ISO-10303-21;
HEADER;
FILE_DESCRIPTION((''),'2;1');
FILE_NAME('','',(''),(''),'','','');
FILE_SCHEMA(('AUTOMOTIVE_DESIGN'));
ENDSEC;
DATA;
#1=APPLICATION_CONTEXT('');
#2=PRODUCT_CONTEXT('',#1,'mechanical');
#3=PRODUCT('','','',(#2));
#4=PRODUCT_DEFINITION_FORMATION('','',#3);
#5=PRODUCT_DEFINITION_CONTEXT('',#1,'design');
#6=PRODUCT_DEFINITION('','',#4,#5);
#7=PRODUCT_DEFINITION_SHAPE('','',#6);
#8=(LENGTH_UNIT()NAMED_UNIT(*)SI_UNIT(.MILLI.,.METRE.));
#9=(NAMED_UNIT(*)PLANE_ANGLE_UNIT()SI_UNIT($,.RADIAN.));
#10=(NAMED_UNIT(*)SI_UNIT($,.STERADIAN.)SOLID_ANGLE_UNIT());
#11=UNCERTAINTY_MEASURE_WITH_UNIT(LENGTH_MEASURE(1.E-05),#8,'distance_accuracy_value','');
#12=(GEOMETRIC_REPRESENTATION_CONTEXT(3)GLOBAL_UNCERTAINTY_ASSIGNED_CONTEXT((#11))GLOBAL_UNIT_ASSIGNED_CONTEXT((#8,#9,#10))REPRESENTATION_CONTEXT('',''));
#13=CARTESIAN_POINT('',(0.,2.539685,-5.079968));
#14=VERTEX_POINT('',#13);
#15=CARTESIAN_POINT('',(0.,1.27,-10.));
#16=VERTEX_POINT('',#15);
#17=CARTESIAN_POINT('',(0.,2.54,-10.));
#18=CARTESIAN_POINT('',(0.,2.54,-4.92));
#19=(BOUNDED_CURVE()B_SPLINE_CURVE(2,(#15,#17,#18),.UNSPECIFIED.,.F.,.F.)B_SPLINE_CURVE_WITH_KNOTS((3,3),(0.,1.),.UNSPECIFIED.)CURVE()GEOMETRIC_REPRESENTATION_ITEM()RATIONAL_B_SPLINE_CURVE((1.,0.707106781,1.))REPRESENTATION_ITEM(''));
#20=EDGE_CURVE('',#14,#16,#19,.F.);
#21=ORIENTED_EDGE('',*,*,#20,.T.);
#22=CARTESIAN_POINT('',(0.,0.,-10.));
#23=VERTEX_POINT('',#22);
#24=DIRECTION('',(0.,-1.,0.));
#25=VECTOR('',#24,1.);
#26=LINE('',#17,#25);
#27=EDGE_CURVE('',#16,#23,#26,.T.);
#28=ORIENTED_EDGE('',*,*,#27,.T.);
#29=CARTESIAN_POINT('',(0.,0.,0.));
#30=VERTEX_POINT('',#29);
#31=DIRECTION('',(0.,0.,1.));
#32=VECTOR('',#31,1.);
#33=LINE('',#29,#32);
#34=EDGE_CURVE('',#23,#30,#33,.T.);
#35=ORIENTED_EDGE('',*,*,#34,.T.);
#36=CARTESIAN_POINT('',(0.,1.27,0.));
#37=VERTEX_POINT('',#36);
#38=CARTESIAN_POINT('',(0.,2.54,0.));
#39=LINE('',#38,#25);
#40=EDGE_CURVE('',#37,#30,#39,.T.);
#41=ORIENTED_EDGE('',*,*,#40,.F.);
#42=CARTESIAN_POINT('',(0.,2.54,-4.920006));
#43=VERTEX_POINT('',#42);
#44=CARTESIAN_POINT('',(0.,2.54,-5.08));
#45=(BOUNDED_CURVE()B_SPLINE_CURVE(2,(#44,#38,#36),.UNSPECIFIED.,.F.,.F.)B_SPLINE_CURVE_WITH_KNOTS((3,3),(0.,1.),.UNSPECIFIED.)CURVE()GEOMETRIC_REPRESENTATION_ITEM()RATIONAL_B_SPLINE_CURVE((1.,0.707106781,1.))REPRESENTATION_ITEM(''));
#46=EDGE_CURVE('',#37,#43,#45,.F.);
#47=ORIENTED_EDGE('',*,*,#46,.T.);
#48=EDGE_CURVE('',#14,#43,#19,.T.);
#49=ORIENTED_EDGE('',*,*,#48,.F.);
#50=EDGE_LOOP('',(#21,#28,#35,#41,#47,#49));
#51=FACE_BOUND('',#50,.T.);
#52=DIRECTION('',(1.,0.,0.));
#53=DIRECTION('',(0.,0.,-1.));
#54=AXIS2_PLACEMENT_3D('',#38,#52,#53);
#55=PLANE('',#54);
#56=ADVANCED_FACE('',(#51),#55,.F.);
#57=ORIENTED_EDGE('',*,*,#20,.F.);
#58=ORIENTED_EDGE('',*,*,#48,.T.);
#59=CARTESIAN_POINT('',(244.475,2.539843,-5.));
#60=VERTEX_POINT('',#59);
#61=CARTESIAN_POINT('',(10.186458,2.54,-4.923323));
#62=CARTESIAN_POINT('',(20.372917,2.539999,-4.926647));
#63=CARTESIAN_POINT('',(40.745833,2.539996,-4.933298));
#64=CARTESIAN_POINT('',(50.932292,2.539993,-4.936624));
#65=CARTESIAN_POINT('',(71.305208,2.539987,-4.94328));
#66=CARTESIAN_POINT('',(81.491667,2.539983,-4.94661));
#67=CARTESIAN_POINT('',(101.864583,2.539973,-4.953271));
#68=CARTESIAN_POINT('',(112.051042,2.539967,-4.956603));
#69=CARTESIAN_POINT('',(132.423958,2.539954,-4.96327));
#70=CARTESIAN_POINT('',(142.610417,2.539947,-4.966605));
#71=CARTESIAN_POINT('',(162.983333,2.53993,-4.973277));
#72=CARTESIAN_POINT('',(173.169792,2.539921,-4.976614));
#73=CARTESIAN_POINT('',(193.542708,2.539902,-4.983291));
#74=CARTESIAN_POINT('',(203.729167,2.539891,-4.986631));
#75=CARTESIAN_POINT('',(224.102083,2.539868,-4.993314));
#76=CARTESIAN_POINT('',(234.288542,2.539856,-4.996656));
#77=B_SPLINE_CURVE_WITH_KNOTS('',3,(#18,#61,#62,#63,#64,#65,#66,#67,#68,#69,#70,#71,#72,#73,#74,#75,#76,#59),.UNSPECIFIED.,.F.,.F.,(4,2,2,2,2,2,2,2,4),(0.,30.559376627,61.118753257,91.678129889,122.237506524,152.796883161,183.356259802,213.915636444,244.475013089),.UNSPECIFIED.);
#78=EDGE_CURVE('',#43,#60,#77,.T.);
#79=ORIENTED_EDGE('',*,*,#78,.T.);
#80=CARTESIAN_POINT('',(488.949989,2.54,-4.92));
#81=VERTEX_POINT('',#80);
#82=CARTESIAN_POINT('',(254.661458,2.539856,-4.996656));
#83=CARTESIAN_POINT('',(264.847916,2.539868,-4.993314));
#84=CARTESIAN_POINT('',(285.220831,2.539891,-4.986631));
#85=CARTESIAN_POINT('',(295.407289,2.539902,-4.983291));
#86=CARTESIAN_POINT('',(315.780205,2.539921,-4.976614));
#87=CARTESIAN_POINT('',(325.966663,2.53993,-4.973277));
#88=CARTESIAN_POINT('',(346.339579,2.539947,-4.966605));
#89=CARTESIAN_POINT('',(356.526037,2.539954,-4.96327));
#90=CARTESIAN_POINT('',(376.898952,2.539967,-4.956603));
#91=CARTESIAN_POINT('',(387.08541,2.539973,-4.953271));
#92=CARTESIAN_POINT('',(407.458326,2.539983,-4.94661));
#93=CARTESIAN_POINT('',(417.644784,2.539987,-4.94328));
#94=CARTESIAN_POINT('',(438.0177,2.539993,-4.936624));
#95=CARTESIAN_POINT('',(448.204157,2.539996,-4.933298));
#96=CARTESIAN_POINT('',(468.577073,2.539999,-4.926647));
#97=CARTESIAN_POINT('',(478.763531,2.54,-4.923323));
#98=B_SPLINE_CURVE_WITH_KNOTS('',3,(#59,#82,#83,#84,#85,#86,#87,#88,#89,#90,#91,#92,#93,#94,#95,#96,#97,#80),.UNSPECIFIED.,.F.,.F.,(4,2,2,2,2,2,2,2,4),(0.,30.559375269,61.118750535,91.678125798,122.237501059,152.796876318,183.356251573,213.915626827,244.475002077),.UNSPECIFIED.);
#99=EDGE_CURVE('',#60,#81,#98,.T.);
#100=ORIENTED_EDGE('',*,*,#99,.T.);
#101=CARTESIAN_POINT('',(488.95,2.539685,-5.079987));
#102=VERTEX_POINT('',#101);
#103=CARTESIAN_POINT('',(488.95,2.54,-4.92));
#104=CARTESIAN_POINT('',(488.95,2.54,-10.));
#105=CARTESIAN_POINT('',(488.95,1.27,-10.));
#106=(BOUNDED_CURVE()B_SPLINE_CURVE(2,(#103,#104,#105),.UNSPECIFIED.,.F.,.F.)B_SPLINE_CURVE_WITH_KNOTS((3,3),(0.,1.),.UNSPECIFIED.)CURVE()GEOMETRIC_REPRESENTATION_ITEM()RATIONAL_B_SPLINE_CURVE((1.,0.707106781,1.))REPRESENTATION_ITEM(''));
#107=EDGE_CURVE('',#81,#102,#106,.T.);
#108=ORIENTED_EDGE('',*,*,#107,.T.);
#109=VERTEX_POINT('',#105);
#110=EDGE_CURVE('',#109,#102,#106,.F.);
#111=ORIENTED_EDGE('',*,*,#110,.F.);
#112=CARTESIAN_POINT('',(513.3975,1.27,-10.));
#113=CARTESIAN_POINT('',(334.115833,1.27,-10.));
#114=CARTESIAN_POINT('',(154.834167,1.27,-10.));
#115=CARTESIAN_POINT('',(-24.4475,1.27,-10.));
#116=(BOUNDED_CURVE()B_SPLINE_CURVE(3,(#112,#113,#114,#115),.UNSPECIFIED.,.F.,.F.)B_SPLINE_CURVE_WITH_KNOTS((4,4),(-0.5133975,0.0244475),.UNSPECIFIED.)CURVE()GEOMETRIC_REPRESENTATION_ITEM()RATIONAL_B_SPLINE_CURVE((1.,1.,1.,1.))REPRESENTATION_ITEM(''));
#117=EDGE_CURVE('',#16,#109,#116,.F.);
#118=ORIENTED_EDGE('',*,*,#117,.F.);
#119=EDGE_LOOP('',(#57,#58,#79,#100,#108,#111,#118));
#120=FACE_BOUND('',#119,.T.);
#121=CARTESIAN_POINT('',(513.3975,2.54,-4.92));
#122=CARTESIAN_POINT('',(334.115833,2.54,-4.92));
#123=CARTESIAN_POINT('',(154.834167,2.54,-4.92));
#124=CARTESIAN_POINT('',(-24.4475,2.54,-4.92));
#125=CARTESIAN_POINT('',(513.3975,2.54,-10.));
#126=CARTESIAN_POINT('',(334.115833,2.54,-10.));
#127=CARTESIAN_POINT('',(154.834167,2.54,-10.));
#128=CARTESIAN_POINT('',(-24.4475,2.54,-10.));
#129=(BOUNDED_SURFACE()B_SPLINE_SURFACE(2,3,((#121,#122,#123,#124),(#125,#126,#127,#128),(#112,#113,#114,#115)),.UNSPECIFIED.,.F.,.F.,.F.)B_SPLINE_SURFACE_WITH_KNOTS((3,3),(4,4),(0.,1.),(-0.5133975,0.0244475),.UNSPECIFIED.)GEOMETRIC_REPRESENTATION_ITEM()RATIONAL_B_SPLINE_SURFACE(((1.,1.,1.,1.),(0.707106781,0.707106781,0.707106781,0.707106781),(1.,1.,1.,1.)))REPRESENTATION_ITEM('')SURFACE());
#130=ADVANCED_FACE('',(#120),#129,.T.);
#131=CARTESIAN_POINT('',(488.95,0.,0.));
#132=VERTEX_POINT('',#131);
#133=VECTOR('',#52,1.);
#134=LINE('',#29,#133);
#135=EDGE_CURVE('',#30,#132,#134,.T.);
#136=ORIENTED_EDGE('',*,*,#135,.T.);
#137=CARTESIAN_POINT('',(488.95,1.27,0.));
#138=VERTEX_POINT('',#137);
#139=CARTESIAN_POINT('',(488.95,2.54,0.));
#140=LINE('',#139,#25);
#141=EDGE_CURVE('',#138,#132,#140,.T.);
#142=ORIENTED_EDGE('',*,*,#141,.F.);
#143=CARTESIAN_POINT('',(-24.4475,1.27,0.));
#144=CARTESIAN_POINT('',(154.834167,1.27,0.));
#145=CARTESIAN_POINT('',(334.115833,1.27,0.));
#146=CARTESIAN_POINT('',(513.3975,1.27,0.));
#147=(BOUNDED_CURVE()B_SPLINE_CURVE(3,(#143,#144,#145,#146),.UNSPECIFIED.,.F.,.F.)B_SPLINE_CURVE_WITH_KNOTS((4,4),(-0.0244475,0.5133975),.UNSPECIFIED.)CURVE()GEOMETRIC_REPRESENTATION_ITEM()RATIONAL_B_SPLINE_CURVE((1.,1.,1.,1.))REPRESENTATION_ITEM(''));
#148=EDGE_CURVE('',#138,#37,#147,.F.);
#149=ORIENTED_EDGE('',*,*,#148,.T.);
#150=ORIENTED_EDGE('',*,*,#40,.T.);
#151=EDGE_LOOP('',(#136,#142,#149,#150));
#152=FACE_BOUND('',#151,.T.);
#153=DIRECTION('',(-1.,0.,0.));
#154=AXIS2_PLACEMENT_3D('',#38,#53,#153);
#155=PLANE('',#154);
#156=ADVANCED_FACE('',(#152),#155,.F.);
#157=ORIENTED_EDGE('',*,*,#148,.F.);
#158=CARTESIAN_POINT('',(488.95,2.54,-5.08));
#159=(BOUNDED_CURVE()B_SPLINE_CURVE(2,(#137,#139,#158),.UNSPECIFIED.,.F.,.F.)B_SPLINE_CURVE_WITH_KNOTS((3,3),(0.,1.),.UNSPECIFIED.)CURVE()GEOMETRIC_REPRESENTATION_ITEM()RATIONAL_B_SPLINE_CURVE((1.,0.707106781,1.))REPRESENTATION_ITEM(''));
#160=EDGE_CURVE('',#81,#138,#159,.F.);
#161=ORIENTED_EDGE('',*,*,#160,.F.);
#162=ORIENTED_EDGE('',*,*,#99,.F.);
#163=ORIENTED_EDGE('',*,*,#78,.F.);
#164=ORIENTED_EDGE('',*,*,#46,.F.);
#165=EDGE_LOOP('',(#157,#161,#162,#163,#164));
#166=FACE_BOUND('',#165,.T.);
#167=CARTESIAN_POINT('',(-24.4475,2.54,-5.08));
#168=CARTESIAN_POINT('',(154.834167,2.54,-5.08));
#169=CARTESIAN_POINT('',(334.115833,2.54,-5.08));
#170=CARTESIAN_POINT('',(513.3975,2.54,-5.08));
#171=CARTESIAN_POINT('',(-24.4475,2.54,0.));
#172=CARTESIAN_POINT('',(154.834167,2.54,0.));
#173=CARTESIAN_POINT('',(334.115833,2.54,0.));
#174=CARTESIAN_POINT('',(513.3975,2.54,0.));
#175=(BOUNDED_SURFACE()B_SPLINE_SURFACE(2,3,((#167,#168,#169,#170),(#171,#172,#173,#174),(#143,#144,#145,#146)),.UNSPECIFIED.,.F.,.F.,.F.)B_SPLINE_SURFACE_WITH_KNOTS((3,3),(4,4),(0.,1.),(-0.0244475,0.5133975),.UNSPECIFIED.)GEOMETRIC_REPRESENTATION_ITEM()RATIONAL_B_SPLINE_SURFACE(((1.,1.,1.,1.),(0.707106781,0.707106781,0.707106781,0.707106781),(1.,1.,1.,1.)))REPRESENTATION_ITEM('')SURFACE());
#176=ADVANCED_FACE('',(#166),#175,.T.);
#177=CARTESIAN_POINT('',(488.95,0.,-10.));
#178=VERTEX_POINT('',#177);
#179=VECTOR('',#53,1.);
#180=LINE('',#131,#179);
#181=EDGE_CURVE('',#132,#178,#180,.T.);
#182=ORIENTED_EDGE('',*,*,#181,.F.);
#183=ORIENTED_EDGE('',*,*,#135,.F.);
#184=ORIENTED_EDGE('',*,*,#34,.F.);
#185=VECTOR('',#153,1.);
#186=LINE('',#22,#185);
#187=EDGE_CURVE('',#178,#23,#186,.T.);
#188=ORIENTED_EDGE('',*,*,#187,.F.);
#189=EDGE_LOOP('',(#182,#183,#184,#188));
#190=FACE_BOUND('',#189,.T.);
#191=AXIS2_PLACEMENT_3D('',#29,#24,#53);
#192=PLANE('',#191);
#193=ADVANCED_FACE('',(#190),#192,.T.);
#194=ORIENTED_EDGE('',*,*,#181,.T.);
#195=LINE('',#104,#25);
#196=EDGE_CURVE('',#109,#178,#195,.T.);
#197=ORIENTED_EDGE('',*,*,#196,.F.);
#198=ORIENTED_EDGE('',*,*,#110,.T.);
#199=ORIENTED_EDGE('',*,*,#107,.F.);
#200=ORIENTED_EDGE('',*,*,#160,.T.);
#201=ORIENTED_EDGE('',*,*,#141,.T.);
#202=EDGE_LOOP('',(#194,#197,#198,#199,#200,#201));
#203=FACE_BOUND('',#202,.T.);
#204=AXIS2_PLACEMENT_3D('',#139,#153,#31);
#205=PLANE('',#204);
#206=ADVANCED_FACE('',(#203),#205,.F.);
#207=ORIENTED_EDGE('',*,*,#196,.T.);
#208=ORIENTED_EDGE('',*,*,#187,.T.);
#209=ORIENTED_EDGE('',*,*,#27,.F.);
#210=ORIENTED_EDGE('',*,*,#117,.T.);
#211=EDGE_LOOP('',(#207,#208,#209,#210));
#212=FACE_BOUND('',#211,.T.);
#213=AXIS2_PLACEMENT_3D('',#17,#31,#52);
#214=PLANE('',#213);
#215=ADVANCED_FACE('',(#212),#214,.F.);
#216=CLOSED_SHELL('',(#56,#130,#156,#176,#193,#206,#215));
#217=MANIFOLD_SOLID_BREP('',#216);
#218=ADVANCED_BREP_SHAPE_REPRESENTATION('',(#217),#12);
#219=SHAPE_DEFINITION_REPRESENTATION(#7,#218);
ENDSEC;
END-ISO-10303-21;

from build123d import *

# Parameters (mm, degrees)
SKETCH1_W           = 488.95
SKETCH1_H           = 10
BOSS_EXTRUDE1_DEPTH = 2.54
FILLET5_SIZE        = 1.27
FILLET5_SIZE_2      = 5.08


with BuildPart() as part:
    # Sketch1 → Boss-Extrude1 (new body)
    with BuildSketch(Plane(origin=(0, 0, 0), x_dir=(1, 0, 0), z_dir=(0, 1, 0))):
        with Locations((244.475, 5)):
            Rectangle(SKETCH1_W, SKETCH1_H)
    extrude(amount=BOSS_EXTRUDE1_DEPTH)

    # Fillet5
    # an asymmetric fillet: 5.08, 1.27 mm, written as the material it takes off along each edge
    with BuildSketch(Plane(origin=(501.65, 2.54, -10), x_dir=(0, -1, 0), z_dir=(-1, 0, 0)), Plane(origin=(-12.7, 2.54, 0), x_dir=(0, -1, 0), z_dir=(1, 0, 0))) as fillet5_piece_1:
        with BuildLine():
            Bezier((FILLET5_SIZE, 0), (0, 0), (0, FILLET5_SIZE_2), weights=[1, 0.707106781, 1])
            Line((0, FILLET5_SIZE_2), (0, 0))
            Line((0, 0), (FILLET5_SIZE, 0))
        make_face()
    extrude(amount=514.35, mode=Mode.SUBTRACT)


solid = part.part
